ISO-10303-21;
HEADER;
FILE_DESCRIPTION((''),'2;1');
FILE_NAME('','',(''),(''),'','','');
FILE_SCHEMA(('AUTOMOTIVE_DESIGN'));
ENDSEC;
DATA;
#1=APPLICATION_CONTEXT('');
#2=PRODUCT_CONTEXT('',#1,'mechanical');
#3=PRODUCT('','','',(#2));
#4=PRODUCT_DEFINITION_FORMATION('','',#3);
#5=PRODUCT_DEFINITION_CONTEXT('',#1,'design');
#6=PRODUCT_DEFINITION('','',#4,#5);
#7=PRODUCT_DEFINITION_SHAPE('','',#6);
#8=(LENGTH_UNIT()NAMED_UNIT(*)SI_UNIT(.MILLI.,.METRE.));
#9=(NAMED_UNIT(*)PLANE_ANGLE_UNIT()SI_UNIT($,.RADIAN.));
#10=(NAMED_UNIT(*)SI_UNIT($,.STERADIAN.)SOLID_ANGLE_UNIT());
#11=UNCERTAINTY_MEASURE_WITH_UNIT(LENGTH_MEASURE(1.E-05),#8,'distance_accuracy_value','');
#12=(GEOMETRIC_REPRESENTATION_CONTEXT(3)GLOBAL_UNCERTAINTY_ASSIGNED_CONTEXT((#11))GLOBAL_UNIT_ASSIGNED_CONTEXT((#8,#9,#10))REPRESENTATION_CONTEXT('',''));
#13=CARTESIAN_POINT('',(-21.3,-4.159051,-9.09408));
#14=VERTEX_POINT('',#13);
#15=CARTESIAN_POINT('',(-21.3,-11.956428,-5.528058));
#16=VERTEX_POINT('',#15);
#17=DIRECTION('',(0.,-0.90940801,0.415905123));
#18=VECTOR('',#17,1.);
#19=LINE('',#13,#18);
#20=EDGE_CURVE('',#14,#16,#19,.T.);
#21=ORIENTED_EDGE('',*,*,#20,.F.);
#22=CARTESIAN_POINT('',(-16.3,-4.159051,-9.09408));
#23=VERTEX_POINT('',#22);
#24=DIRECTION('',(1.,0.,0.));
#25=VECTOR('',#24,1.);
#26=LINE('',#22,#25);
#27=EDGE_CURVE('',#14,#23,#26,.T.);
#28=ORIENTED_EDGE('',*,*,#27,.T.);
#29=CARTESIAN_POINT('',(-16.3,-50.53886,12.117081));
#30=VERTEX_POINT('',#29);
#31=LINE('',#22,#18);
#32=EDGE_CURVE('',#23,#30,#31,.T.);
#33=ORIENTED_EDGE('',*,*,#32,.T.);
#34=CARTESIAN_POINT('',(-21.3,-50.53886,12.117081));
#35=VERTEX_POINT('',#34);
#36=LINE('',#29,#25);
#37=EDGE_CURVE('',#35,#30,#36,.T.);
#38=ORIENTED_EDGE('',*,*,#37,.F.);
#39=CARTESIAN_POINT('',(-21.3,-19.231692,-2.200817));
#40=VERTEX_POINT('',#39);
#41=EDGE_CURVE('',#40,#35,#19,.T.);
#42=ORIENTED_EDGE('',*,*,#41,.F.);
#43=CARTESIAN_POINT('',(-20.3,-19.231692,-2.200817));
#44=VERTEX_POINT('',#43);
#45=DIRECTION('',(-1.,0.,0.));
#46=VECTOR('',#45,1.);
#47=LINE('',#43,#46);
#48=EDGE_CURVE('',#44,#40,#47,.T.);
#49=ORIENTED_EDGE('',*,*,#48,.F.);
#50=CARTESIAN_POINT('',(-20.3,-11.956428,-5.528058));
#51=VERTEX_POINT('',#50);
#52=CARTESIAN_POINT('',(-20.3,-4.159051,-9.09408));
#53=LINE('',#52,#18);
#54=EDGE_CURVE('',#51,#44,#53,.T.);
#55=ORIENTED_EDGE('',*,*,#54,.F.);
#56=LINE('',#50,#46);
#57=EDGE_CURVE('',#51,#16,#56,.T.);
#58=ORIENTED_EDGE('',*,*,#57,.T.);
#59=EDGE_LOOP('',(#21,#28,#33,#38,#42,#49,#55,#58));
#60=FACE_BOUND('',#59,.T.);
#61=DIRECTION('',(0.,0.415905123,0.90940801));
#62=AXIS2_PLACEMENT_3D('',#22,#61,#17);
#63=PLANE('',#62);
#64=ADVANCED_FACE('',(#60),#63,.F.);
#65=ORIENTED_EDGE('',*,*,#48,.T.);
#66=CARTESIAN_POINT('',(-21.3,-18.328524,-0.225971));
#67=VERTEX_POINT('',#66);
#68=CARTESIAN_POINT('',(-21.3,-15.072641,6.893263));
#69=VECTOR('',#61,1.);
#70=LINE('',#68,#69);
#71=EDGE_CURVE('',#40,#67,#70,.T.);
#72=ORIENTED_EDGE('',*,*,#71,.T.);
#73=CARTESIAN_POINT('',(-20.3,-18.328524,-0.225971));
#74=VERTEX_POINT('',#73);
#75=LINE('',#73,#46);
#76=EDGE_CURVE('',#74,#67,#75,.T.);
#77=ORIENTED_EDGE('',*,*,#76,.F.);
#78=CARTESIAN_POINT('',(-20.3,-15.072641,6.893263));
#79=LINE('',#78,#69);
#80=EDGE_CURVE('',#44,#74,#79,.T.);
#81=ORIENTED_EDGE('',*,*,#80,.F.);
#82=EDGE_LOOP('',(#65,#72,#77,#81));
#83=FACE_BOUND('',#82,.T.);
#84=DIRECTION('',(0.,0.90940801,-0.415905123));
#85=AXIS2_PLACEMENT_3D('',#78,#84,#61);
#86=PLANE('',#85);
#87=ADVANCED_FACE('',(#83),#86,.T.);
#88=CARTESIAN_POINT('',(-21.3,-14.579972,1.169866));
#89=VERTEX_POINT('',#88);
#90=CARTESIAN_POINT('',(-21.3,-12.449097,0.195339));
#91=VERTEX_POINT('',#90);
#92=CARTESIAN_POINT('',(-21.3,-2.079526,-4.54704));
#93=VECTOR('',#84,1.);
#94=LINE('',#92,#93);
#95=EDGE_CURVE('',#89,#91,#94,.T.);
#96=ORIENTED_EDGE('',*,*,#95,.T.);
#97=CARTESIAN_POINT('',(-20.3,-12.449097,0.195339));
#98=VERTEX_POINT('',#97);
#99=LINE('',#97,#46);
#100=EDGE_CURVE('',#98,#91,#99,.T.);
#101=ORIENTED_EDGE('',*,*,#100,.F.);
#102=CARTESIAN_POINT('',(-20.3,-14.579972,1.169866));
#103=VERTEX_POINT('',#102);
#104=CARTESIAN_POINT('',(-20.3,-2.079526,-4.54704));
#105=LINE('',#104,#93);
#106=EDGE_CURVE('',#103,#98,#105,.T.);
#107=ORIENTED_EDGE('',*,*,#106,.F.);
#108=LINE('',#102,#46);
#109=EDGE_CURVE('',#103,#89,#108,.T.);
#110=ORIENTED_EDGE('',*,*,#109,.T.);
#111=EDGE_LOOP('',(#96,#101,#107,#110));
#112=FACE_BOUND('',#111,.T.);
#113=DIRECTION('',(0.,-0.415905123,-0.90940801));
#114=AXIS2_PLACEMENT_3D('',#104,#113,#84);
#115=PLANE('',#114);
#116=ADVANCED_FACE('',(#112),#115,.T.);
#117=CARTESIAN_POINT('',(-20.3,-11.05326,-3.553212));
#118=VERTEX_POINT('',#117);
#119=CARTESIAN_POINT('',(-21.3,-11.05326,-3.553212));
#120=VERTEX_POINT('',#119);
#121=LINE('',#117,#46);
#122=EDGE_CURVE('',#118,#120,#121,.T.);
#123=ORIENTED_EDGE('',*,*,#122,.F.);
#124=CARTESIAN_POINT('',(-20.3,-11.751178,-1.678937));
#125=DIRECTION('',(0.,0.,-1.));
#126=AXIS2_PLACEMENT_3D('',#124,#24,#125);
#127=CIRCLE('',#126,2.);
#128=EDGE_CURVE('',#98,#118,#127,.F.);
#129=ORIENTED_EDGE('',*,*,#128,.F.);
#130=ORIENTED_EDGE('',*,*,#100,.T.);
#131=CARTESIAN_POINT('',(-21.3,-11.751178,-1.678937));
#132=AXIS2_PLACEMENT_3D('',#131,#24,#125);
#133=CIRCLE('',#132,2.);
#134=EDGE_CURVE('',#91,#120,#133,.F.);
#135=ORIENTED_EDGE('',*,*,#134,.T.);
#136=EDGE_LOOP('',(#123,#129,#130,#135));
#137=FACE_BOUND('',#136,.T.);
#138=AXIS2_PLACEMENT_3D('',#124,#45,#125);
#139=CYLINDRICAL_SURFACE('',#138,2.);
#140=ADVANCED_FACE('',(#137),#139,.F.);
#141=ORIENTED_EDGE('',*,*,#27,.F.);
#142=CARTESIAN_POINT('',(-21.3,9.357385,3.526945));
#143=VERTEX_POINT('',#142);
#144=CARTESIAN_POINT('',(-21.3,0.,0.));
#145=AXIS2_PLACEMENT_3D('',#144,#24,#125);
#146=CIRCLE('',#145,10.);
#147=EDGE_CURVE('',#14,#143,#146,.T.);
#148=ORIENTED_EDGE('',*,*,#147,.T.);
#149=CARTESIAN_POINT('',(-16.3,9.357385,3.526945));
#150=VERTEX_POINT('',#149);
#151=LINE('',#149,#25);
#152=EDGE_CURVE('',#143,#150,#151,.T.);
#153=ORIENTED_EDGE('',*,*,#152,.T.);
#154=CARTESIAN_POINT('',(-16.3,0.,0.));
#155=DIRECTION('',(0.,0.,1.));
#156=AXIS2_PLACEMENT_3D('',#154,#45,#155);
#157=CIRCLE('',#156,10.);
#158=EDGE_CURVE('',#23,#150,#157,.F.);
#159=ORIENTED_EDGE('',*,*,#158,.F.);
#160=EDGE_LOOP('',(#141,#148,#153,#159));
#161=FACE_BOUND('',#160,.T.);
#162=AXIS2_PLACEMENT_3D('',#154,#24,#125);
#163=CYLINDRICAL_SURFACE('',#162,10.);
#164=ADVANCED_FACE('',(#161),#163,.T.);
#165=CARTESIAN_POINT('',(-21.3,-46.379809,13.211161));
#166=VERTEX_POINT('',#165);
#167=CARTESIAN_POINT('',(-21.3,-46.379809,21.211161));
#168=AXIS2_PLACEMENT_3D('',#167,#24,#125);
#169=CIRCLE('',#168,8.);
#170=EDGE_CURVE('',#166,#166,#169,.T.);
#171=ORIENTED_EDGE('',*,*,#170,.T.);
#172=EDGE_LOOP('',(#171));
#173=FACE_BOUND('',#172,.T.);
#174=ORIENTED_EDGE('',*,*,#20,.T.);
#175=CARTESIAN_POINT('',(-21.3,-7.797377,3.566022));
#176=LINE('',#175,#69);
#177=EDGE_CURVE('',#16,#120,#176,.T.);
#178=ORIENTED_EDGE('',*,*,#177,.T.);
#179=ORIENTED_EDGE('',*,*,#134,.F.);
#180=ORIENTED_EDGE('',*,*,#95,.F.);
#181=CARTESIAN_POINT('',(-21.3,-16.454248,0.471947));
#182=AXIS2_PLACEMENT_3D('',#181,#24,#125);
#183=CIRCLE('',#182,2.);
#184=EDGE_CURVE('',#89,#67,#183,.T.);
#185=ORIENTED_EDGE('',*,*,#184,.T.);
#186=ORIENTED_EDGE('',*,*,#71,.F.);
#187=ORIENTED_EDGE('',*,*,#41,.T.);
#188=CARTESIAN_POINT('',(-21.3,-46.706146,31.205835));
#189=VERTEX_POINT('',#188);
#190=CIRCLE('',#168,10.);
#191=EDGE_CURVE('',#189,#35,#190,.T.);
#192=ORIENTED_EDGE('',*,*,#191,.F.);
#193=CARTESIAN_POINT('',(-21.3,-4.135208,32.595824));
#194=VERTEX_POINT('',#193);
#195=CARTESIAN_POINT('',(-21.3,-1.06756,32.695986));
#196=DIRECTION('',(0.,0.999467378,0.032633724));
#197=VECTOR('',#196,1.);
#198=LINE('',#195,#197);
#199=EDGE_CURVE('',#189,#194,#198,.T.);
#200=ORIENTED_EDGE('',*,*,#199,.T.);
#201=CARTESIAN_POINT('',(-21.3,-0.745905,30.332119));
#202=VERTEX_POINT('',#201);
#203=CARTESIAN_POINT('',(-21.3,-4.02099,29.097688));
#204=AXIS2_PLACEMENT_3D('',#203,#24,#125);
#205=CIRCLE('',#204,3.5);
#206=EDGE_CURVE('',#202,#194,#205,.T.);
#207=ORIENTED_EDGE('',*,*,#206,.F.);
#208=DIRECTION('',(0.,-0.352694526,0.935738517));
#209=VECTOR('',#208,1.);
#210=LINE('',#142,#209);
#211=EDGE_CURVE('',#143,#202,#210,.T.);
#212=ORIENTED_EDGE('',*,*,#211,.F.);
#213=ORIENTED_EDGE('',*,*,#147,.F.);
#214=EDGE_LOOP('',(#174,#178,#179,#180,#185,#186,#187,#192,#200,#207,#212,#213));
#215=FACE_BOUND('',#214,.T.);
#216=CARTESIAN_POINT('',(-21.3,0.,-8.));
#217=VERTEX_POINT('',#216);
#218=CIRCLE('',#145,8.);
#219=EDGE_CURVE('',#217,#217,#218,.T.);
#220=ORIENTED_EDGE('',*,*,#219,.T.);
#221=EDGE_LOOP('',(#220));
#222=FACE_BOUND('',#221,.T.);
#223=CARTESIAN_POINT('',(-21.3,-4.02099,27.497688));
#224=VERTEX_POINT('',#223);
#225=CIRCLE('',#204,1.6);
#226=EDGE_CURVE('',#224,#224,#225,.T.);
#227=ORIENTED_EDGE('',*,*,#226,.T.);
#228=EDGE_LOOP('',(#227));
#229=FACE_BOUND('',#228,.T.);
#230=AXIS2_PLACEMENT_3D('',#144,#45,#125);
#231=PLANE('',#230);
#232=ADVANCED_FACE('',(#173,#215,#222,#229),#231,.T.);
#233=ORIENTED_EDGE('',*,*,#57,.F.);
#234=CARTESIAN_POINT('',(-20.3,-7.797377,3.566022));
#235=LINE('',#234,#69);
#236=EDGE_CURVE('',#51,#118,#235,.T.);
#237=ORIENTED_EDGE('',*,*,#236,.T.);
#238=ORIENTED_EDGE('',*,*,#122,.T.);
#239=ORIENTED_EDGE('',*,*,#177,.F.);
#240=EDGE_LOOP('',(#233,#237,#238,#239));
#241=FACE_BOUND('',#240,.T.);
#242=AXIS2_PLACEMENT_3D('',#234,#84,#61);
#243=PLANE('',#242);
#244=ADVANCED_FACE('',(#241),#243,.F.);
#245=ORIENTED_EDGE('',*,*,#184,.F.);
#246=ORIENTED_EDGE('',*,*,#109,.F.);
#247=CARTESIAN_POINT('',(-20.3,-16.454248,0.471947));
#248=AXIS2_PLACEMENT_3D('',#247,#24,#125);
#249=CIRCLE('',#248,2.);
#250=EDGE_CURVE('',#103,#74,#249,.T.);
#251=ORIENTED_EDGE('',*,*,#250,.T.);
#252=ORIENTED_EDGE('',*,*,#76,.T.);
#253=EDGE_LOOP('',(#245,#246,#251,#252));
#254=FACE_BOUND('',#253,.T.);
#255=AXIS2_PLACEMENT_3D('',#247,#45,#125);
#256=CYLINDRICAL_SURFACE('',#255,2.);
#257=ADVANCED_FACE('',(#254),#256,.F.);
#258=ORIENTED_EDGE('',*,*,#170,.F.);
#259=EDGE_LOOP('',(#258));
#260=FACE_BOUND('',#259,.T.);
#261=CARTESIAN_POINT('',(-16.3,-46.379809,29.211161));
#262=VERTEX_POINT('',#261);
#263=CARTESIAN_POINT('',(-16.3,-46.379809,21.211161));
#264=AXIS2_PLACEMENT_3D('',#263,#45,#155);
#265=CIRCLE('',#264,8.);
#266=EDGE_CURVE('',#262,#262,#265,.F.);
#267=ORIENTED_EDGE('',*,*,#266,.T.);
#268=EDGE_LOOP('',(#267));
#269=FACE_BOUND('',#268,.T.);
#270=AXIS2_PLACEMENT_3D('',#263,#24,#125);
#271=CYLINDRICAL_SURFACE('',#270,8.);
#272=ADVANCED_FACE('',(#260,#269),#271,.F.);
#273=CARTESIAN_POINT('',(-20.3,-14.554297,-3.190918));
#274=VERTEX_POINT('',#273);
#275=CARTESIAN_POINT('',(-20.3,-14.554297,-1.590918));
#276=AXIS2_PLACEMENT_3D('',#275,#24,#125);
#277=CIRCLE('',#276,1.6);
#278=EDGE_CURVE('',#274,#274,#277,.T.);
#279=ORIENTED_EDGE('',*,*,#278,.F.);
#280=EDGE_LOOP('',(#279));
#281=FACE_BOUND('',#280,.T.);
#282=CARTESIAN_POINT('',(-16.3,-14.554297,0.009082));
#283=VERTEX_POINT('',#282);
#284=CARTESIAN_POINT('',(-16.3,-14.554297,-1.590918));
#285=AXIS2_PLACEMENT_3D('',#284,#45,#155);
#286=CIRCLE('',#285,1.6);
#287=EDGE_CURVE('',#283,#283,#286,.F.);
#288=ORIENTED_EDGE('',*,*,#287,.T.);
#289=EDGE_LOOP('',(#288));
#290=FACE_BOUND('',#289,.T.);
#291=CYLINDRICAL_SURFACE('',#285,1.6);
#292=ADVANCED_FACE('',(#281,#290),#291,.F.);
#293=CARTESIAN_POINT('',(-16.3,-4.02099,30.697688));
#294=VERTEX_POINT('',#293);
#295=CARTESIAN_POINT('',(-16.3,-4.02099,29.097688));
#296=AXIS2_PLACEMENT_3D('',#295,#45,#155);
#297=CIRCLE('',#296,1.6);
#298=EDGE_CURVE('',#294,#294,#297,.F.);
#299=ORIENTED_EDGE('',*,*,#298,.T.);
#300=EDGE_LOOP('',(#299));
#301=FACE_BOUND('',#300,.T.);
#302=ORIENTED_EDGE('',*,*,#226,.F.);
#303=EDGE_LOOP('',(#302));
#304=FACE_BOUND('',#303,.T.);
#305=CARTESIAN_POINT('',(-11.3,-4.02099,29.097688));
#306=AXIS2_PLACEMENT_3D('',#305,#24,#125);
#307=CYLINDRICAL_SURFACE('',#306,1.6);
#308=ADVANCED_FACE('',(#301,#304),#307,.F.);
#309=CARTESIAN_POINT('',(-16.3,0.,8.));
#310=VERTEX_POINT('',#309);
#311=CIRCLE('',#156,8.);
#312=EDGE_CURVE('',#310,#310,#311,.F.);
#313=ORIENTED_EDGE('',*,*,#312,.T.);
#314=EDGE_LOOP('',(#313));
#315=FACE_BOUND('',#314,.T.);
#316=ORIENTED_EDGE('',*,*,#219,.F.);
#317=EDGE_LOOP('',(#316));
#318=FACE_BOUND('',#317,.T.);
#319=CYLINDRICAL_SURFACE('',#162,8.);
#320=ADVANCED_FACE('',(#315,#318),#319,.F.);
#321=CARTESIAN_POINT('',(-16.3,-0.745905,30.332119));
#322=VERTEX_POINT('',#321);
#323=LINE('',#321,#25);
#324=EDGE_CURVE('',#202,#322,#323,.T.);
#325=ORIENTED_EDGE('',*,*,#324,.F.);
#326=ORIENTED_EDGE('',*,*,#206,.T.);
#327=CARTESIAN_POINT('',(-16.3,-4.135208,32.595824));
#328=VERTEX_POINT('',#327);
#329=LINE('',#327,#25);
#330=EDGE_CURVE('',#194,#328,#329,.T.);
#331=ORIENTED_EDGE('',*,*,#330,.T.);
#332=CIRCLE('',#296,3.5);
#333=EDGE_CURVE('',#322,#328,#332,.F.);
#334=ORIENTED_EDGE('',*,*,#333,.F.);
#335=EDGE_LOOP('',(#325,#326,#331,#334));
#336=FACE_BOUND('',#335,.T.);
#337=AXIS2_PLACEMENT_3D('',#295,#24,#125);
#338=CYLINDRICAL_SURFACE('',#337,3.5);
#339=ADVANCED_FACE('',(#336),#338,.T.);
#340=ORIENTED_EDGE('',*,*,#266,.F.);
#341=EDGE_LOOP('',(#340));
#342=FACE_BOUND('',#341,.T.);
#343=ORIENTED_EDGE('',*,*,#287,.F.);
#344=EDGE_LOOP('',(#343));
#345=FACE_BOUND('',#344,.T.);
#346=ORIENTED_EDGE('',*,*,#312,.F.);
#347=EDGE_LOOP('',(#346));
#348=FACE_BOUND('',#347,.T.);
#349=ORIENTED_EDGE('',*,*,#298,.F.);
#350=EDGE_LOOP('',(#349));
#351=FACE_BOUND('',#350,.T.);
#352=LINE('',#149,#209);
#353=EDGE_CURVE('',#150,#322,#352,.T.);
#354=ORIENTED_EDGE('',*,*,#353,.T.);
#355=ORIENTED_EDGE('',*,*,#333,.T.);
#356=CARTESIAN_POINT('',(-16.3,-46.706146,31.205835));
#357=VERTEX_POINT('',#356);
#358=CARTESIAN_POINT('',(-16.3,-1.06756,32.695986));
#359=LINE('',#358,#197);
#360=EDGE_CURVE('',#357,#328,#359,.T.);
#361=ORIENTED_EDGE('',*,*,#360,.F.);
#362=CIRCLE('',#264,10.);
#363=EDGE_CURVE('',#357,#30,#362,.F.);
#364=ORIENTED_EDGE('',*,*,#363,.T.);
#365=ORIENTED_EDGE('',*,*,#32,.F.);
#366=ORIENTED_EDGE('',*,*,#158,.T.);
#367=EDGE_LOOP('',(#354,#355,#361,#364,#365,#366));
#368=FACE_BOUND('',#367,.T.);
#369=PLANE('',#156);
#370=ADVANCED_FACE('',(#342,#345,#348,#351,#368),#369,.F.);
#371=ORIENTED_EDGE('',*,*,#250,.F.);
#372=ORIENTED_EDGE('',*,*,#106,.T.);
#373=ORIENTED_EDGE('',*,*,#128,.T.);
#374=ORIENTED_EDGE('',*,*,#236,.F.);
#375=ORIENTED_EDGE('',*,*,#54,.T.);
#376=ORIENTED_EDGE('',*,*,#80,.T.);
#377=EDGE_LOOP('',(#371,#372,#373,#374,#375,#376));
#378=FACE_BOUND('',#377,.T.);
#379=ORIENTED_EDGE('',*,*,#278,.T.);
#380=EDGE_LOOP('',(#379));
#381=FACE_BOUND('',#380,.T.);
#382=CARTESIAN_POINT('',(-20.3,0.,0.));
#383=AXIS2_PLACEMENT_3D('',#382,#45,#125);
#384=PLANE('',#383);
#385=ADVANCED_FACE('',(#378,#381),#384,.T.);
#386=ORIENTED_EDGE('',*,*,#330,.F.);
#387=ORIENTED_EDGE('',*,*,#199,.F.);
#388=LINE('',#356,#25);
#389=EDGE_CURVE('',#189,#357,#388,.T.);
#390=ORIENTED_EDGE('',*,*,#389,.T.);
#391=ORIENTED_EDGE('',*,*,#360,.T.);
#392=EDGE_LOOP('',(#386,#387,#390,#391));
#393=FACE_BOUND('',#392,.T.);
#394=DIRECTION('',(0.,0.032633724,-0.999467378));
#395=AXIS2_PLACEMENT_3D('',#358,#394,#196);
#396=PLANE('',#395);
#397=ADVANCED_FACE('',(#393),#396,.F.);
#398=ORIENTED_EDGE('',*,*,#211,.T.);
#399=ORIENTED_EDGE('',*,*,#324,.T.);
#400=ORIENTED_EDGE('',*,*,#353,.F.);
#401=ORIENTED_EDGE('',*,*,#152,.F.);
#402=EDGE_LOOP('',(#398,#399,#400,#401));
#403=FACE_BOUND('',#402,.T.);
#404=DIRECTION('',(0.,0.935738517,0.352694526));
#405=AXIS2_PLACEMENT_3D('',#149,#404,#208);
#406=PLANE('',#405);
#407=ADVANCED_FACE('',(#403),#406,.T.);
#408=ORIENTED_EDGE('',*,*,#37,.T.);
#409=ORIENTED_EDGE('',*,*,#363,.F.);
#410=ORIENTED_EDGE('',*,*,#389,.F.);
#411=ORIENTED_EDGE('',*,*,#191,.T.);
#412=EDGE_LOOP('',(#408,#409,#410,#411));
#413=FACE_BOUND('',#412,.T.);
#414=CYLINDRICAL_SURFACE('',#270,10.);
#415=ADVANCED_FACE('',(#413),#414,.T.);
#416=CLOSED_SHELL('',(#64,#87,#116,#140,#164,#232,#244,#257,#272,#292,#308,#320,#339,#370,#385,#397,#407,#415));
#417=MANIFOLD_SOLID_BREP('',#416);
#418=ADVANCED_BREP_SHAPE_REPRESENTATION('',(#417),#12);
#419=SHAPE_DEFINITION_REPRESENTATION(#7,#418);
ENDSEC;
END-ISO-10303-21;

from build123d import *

# Parameters (mm, degrees)
BOSS_EXTRUDE1_START  = -11.3
SKETCH2_R            = 8
BOSS_EXTRUDE1_DEPTH  = 5
BOSS_EXTRUDE2_START  = -11.3
BOSS_EXTRUDE2_DEPTH  = 5
CUT_EXTRUDE2_START   = -11.3
CUT_EXTRUDE2_DEPTH   = 1
M3_CLEARANCE_HOLE1_D = 3.2
M3_CLEARANCE_HOLE2_D = 3.2


# Read off the part's stored shape, not the designer's step: Intersect1
with BuildPart() as part:
    # Sketch2 → Boss-Extrude1 (new body)
    with BuildSketch(Plane(origin=(0, 0, 0), x_dir=(0, 0, -1), z_dir=(1, 0, 0)).offset(BOSS_EXTRUDE1_START)):
        with BuildLine():
            Line((9.0940801, -4.15905123), (-12.117081171, -50.538859741))
            ThreePointArc((-12.117081171, -50.538859741), (-25.370212501, -55.473888611), (-30.305241372, -42.220757281))
            Line((-30.305241372, -42.220757281), (-9.0940801, 4.15905123))
            ThreePointArc((-9.0940801, 4.15905123), (4.15905123, 9.0940801), (9.0940801, -4.15905123))
        make_face()
        with Locations((-21.211161271, -46.379808511)):
            Circle(SKETCH2_R, mode=Mode.SUBTRACT)
        Circle(SKETCH2_R, mode=Mode.SUBTRACT)
    boss_extrude1 = extrude(amount=-BOSS_EXTRUDE1_DEPTH)

    # Sketch2<3> → Boss-Extrude2 (add)
    with BuildSketch(Plane(origin=(0, 0, 0), x_dir=(0, 0, -1), z_dir=(1, 0, 0)).offset(BOSS_EXTRUDE2_START)):
        with BuildLine():
            ThreePointArc((-9.0940801, 4.15905123), (-6.824825213, 7.309019141), (-3.526945256, 9.357385167))
            Line((-3.526945256, 9.357385167), (-30.332118628, -0.745905163))
            ThreePointArc((-30.332118628, -0.745905163), (-32.00821012, -2.077061023), (-32.595823612, -4.135208005))
            Line((-32.595823612, -4.135208005), (-31.205835053, -46.706145748))
            ThreePointArc((-31.205835053, -46.706145748), (-31.015487287, -44.411257932), (-30.305241372, -42.220757281))
            Line((-30.305241372, -42.220757281), (-9.0940801, 4.15905123))
        make_face()
    boss_extrude2 = extrude(amount=-BOSS_EXTRUDE2_DEPTH)

    # Sketch2<6> → Cut-Extrude2 (cut)
    with BuildSketch(Plane(origin=(0, 0, 0), x_dir=(0, 0, -1), z_dir=(1, 0, 0)).offset(CUT_EXTRUDE2_START)):
        with BuildLine():
            Line((2.200817213, -19.231691933), (5.528058196, -11.956427853))
            Line((5.528058196, -11.956427853), (3.553212429, -11.053259569))
            ThreePointArc((3.553212429, -11.053259569), (0.981018146, -9.876902238), (-0.195339185, -12.449096521))
            Line((-0.195339185, -12.449096521), (-1.169865506, -14.579972035))
            ThreePointArc((-1.169865506, -14.579972035), (-2.346222837, -17.152166318), (0.225971446, -18.328523649))
            Line((0.225971446, -18.328523649), (2.200817213, -19.231691933))
        make_face()
    cut_extrude2 = extrude(amount=-CUT_EXTRUDE2_DEPTH, mode=Mode.SUBTRACT)

    # M3 Clearance Hole1 (through all)
    with Locations(Plane(origin=(-11.3, 0, 0), x_dir=(0, 0, 1), z_dir=(1, 0, 0))):
        with Locations((29.097687789, 4.020989972)):
            m3_clearance_hole1 = Hole(M3_CLEARANCE_HOLE1_D / 2)

    # M3 Clearance Hole2 (through all)
    with Locations(Plane.ZY.offset(16.3)):
        with Locations((-1.590917679, -14.554297085)):
            m3_clearance_hole2 = Hole(M3_CLEARANCE_HOLE2_D / 2)

    # Mirror2: Boss-Extrude1, Boss-Extrude2, Cut-Extrude2, M3 Clearance Hole1, M3 Clearance Hole2 across plane
    add(boss_extrude1.mirror(Plane.ZY.offset(16.3)))
    add(boss_extrude2.mirror(Plane.ZY.offset(16.3)))
    add(cut_extrude2.mirror(Plane.ZY.offset(16.3)), mode=Mode.SUBTRACT)
    add(m3_clearance_hole1.mirror(Plane.ZY.offset(16.3)), mode=Mode.SUBTRACT)
    add(m3_clearance_hole2.mirror(Plane.ZY.offset(16.3)), mode=Mode.SUBTRACT)


with BuildPart() as body_2:
    # Intersect1: the piece on the far side of the plane
    add(part.part)
    split(bisect_by=Plane.YZ.offset(-16.3), keep=Keep.BOTTOM)


with BuildPart() as part_1:
    add(part.part)

    # Intersect1
    split(bisect_by=Plane.YZ.offset(-16.3), keep=Keep.TOP)


solid = body_2.part
